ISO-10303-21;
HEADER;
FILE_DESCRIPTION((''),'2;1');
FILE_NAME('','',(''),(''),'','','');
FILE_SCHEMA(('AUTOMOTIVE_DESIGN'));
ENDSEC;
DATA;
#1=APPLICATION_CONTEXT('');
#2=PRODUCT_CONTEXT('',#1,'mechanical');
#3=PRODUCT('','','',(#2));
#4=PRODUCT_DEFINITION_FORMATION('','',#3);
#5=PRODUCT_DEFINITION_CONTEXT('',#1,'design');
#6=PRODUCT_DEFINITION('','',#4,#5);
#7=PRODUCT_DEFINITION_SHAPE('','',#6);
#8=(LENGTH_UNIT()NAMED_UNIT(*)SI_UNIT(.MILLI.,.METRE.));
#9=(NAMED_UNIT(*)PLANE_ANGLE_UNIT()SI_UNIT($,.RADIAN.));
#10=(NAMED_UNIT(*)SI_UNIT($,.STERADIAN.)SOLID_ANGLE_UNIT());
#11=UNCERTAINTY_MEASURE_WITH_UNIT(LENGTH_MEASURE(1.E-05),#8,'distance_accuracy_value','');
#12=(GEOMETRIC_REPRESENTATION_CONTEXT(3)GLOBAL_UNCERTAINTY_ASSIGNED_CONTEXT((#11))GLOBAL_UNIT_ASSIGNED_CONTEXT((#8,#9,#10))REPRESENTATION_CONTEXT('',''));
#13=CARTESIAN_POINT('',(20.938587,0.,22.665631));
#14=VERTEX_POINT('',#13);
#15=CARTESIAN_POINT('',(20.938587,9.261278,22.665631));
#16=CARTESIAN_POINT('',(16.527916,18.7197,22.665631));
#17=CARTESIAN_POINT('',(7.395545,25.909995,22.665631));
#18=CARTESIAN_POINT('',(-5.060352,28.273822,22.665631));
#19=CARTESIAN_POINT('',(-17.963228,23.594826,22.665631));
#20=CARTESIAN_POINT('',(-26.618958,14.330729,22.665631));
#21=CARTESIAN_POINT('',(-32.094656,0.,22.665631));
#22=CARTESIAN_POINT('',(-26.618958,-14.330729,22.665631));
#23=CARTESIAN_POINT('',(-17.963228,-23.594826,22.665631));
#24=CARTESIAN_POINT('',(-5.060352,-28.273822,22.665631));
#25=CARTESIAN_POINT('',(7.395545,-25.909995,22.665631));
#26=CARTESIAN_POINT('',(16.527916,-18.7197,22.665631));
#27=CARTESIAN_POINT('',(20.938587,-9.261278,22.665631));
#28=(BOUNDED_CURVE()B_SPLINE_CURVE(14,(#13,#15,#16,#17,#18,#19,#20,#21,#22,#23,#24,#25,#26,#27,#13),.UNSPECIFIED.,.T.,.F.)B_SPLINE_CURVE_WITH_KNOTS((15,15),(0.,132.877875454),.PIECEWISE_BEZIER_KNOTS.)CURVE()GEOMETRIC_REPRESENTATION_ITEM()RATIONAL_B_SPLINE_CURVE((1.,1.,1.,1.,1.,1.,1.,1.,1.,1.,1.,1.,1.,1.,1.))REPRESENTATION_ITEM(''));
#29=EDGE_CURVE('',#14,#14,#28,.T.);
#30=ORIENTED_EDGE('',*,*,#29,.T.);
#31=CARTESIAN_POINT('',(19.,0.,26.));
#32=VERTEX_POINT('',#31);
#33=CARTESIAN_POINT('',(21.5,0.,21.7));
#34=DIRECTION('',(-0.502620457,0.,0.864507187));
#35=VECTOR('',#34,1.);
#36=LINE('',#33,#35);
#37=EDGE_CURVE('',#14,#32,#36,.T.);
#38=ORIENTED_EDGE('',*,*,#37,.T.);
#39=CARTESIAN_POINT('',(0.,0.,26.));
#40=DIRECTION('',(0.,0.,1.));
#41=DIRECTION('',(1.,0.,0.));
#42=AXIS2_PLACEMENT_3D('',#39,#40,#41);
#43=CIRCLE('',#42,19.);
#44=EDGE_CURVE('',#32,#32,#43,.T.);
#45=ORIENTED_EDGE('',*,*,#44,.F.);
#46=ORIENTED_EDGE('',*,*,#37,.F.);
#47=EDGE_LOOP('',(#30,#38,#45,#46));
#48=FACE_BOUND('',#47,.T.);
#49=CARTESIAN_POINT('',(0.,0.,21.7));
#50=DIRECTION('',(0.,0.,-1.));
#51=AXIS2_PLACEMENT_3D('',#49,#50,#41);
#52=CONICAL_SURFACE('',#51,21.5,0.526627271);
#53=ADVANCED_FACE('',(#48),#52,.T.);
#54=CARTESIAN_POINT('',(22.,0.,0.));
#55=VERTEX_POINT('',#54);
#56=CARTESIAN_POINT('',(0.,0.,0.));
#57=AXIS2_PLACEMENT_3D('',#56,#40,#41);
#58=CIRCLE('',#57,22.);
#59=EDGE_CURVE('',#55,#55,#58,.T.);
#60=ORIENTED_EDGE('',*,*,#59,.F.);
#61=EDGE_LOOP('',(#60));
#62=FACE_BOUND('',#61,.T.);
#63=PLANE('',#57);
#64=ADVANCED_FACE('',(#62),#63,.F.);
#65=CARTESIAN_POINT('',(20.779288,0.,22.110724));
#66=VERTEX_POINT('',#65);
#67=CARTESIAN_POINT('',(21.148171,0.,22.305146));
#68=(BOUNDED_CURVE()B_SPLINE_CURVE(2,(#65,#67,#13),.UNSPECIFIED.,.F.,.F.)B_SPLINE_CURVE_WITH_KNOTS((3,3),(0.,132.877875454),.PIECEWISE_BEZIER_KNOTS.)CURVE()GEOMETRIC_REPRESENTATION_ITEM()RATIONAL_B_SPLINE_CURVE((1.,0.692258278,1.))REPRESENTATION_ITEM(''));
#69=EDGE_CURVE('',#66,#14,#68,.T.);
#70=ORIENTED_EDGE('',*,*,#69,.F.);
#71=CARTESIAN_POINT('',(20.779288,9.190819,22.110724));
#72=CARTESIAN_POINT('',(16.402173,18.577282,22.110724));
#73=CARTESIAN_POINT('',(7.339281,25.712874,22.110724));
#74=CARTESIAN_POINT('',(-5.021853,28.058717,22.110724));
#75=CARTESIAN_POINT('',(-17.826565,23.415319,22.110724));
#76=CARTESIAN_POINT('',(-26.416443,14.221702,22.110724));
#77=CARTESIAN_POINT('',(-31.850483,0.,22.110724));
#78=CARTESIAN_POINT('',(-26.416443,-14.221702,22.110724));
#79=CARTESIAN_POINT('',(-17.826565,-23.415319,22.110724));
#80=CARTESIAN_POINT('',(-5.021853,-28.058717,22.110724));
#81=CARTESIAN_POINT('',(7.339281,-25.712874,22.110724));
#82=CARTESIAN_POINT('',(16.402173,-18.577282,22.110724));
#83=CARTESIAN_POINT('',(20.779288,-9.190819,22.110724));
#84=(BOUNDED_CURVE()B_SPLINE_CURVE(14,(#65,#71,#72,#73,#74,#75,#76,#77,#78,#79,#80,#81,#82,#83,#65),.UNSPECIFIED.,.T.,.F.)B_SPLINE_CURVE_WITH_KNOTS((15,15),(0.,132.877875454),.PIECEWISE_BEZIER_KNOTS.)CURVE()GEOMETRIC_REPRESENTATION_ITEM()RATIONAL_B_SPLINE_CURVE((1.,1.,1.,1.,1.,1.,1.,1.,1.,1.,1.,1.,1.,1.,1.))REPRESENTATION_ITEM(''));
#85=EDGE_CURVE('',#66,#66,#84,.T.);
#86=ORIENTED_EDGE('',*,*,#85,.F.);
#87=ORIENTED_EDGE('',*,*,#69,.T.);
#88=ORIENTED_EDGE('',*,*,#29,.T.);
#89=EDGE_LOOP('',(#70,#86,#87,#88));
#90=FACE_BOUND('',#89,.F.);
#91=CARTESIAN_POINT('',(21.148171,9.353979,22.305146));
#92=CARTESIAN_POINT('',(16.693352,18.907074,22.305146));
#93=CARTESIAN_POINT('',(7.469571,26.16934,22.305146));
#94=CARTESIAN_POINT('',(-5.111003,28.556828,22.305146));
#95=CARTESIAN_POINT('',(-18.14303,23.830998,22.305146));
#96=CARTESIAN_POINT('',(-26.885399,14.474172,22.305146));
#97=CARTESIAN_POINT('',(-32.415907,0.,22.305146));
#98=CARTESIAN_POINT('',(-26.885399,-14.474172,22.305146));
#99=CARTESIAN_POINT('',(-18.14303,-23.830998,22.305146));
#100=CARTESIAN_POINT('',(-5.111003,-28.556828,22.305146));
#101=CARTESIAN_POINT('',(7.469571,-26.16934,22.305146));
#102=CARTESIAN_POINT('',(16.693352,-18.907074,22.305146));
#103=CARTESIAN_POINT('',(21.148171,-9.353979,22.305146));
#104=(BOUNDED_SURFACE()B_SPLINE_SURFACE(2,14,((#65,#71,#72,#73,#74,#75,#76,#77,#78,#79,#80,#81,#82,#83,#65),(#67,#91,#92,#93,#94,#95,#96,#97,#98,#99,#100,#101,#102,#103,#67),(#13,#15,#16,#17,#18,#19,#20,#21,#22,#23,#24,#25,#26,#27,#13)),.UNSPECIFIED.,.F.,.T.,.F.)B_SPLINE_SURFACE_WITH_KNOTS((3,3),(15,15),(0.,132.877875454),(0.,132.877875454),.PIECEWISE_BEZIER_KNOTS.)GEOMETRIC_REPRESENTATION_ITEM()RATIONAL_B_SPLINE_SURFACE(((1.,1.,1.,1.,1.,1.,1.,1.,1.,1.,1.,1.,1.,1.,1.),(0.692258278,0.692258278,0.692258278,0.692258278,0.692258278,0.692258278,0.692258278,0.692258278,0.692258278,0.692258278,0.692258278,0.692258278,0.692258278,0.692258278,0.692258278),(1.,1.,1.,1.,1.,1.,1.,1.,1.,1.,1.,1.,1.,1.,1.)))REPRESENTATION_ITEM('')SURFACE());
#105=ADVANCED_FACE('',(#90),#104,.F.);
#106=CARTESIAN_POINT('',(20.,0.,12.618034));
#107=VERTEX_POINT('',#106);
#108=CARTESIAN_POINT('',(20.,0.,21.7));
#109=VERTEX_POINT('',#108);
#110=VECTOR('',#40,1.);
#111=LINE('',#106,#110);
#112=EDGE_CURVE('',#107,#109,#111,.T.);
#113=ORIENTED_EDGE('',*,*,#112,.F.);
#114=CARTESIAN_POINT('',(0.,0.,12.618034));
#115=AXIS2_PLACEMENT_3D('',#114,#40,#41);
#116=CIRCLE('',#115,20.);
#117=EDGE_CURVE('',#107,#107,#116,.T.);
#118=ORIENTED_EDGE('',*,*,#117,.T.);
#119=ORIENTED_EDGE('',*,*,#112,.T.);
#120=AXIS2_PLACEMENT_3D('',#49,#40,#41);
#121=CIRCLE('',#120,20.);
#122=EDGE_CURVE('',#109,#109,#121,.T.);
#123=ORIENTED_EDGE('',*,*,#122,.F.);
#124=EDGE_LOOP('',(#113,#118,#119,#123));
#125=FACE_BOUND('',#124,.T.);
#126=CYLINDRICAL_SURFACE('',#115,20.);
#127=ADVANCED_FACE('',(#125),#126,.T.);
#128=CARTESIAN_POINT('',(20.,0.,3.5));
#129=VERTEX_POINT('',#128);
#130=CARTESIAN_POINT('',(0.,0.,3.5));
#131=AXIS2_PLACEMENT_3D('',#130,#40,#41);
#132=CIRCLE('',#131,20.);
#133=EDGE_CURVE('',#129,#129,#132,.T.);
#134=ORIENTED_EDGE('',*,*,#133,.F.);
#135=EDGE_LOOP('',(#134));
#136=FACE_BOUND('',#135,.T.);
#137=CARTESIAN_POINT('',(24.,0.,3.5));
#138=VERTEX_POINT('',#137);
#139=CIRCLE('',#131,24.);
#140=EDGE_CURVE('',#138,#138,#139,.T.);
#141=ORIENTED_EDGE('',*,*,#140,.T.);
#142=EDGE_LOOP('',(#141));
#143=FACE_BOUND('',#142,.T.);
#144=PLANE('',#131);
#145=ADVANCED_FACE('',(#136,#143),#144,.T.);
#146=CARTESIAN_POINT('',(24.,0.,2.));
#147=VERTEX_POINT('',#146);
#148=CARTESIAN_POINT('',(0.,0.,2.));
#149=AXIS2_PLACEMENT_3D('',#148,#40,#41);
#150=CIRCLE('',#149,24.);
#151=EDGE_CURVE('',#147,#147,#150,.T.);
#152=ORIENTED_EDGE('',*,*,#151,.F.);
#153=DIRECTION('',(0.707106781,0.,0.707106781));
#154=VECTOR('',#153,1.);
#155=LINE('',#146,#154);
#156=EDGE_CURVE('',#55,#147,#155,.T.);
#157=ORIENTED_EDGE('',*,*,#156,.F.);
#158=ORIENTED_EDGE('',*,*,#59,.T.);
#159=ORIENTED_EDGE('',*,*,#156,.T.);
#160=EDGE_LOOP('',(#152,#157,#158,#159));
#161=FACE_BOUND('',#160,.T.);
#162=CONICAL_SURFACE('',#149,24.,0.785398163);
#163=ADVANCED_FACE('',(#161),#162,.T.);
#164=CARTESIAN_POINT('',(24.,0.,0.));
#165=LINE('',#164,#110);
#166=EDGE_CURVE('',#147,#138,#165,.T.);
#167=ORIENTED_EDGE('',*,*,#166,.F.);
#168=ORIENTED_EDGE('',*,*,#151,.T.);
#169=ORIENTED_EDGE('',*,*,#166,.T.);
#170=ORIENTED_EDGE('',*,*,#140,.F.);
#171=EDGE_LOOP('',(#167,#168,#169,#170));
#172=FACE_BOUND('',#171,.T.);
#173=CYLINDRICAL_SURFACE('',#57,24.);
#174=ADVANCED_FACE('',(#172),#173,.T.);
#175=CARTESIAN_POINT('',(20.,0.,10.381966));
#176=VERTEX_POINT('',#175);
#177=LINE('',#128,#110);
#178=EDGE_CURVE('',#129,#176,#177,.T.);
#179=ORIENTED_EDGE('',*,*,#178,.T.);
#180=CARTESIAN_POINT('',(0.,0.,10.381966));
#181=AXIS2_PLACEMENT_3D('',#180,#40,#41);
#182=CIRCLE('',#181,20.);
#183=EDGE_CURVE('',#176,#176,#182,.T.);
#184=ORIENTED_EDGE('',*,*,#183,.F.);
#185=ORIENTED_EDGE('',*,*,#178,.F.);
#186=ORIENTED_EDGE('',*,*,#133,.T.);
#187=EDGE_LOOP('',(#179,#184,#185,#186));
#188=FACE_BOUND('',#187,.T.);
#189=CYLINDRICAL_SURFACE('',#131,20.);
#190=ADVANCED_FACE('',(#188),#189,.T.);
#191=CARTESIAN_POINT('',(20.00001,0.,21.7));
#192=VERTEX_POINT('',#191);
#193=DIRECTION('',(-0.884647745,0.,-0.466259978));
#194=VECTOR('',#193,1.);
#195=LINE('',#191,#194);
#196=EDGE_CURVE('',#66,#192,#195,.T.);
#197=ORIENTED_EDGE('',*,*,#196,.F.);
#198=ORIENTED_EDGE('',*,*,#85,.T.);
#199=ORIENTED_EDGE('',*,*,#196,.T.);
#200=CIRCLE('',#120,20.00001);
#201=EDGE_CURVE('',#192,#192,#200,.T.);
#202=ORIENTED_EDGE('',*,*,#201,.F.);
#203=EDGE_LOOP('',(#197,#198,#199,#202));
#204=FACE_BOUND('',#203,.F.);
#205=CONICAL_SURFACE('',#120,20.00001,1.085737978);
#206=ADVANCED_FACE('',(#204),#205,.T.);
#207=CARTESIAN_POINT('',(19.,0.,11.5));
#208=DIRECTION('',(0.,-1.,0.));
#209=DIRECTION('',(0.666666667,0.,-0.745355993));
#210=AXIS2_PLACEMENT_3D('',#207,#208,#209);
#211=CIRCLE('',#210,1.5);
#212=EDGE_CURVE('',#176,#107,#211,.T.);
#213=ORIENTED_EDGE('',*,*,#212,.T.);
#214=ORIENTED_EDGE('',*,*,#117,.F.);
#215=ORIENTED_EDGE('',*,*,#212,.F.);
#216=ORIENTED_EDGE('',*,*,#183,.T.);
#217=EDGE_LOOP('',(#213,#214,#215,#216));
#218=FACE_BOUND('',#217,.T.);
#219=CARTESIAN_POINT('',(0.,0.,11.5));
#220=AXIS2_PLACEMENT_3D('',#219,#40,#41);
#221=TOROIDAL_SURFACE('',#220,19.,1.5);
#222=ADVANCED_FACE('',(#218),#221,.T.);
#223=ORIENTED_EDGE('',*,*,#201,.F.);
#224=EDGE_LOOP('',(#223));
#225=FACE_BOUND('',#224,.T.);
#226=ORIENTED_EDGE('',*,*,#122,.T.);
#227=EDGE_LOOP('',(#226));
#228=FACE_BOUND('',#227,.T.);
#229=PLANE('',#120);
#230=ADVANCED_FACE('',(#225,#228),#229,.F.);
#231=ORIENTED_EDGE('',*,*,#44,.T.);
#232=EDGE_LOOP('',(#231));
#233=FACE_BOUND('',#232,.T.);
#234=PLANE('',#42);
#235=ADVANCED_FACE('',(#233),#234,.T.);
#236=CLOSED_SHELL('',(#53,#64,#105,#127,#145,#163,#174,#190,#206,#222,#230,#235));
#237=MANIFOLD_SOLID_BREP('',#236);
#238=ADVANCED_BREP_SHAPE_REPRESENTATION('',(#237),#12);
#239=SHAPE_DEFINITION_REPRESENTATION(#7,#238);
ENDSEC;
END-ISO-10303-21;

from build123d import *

# Parameters (mm, degrees)
F2_SIZE  = 2
F3_SIZE2 = 1.49999
F3_SIZE  = 0.69999
F4_R     = 0.4


# Not quite as in the source:
# - a fillet or chamfer is up to 0.001 mm smaller than in the source, because OpenCascade refuses the exact size


with BuildPart() as f1:
    # F0 (on Front) → F1 (revolve)
    with BuildSketch(Plane.XZ):
        with BuildLine():
            Line((0, 26), (0, 0))
            Line((0, 0), (24, 0))
            Line((24, 0), (24, 3.5))
            Line((24, 3.5), (20, 3.5))
            Line((20, 3.5), (20, 10.3819660113))
            ThreePointArc((20, 10.3819660113), (20.5, 11.5), (20, 12.6180339887))
            Line((20, 12.6180339887), (20, 21.7))
            Line((20, 21.7), (21.5, 21.7))
            Line((21.5, 21.7), (19, 26))
            Line((19, 26), (0, 26))
        make_face()
    revolve(axis=Axis((0, 0, 13), (0, 0, 1)))

    # F2
    f2_edges = [f1.edges().sort_by_distance(p)[0] for p in [
        (-24, 0, 0),
    ]]
    chamfer(f2_edges, length=F2_SIZE)

    # F3 (size 0.7 and 1.5 in the source; OpenCascade refuses exactly that, so slightly less here)
    f3_edges = [f1.edges().sort_by_distance(p)[0] for p in [
        (-21.5, 0, 21.7),
    ]]
    f3_side = f1.faces().sort_by_distance((-20.25, 0, 23.85))[0]
    chamfer(f3_edges, length=F3_SIZE, length2=F3_SIZE2, reference=f3_side)

    # F4
    f4_edges = [f1.edges().sort_by_distance(p)[0] for p in [
        (-21.148171, 0, 22.305146),
    ]]
    fillet(f4_edges, radius=F4_R)


solid = f1.part
